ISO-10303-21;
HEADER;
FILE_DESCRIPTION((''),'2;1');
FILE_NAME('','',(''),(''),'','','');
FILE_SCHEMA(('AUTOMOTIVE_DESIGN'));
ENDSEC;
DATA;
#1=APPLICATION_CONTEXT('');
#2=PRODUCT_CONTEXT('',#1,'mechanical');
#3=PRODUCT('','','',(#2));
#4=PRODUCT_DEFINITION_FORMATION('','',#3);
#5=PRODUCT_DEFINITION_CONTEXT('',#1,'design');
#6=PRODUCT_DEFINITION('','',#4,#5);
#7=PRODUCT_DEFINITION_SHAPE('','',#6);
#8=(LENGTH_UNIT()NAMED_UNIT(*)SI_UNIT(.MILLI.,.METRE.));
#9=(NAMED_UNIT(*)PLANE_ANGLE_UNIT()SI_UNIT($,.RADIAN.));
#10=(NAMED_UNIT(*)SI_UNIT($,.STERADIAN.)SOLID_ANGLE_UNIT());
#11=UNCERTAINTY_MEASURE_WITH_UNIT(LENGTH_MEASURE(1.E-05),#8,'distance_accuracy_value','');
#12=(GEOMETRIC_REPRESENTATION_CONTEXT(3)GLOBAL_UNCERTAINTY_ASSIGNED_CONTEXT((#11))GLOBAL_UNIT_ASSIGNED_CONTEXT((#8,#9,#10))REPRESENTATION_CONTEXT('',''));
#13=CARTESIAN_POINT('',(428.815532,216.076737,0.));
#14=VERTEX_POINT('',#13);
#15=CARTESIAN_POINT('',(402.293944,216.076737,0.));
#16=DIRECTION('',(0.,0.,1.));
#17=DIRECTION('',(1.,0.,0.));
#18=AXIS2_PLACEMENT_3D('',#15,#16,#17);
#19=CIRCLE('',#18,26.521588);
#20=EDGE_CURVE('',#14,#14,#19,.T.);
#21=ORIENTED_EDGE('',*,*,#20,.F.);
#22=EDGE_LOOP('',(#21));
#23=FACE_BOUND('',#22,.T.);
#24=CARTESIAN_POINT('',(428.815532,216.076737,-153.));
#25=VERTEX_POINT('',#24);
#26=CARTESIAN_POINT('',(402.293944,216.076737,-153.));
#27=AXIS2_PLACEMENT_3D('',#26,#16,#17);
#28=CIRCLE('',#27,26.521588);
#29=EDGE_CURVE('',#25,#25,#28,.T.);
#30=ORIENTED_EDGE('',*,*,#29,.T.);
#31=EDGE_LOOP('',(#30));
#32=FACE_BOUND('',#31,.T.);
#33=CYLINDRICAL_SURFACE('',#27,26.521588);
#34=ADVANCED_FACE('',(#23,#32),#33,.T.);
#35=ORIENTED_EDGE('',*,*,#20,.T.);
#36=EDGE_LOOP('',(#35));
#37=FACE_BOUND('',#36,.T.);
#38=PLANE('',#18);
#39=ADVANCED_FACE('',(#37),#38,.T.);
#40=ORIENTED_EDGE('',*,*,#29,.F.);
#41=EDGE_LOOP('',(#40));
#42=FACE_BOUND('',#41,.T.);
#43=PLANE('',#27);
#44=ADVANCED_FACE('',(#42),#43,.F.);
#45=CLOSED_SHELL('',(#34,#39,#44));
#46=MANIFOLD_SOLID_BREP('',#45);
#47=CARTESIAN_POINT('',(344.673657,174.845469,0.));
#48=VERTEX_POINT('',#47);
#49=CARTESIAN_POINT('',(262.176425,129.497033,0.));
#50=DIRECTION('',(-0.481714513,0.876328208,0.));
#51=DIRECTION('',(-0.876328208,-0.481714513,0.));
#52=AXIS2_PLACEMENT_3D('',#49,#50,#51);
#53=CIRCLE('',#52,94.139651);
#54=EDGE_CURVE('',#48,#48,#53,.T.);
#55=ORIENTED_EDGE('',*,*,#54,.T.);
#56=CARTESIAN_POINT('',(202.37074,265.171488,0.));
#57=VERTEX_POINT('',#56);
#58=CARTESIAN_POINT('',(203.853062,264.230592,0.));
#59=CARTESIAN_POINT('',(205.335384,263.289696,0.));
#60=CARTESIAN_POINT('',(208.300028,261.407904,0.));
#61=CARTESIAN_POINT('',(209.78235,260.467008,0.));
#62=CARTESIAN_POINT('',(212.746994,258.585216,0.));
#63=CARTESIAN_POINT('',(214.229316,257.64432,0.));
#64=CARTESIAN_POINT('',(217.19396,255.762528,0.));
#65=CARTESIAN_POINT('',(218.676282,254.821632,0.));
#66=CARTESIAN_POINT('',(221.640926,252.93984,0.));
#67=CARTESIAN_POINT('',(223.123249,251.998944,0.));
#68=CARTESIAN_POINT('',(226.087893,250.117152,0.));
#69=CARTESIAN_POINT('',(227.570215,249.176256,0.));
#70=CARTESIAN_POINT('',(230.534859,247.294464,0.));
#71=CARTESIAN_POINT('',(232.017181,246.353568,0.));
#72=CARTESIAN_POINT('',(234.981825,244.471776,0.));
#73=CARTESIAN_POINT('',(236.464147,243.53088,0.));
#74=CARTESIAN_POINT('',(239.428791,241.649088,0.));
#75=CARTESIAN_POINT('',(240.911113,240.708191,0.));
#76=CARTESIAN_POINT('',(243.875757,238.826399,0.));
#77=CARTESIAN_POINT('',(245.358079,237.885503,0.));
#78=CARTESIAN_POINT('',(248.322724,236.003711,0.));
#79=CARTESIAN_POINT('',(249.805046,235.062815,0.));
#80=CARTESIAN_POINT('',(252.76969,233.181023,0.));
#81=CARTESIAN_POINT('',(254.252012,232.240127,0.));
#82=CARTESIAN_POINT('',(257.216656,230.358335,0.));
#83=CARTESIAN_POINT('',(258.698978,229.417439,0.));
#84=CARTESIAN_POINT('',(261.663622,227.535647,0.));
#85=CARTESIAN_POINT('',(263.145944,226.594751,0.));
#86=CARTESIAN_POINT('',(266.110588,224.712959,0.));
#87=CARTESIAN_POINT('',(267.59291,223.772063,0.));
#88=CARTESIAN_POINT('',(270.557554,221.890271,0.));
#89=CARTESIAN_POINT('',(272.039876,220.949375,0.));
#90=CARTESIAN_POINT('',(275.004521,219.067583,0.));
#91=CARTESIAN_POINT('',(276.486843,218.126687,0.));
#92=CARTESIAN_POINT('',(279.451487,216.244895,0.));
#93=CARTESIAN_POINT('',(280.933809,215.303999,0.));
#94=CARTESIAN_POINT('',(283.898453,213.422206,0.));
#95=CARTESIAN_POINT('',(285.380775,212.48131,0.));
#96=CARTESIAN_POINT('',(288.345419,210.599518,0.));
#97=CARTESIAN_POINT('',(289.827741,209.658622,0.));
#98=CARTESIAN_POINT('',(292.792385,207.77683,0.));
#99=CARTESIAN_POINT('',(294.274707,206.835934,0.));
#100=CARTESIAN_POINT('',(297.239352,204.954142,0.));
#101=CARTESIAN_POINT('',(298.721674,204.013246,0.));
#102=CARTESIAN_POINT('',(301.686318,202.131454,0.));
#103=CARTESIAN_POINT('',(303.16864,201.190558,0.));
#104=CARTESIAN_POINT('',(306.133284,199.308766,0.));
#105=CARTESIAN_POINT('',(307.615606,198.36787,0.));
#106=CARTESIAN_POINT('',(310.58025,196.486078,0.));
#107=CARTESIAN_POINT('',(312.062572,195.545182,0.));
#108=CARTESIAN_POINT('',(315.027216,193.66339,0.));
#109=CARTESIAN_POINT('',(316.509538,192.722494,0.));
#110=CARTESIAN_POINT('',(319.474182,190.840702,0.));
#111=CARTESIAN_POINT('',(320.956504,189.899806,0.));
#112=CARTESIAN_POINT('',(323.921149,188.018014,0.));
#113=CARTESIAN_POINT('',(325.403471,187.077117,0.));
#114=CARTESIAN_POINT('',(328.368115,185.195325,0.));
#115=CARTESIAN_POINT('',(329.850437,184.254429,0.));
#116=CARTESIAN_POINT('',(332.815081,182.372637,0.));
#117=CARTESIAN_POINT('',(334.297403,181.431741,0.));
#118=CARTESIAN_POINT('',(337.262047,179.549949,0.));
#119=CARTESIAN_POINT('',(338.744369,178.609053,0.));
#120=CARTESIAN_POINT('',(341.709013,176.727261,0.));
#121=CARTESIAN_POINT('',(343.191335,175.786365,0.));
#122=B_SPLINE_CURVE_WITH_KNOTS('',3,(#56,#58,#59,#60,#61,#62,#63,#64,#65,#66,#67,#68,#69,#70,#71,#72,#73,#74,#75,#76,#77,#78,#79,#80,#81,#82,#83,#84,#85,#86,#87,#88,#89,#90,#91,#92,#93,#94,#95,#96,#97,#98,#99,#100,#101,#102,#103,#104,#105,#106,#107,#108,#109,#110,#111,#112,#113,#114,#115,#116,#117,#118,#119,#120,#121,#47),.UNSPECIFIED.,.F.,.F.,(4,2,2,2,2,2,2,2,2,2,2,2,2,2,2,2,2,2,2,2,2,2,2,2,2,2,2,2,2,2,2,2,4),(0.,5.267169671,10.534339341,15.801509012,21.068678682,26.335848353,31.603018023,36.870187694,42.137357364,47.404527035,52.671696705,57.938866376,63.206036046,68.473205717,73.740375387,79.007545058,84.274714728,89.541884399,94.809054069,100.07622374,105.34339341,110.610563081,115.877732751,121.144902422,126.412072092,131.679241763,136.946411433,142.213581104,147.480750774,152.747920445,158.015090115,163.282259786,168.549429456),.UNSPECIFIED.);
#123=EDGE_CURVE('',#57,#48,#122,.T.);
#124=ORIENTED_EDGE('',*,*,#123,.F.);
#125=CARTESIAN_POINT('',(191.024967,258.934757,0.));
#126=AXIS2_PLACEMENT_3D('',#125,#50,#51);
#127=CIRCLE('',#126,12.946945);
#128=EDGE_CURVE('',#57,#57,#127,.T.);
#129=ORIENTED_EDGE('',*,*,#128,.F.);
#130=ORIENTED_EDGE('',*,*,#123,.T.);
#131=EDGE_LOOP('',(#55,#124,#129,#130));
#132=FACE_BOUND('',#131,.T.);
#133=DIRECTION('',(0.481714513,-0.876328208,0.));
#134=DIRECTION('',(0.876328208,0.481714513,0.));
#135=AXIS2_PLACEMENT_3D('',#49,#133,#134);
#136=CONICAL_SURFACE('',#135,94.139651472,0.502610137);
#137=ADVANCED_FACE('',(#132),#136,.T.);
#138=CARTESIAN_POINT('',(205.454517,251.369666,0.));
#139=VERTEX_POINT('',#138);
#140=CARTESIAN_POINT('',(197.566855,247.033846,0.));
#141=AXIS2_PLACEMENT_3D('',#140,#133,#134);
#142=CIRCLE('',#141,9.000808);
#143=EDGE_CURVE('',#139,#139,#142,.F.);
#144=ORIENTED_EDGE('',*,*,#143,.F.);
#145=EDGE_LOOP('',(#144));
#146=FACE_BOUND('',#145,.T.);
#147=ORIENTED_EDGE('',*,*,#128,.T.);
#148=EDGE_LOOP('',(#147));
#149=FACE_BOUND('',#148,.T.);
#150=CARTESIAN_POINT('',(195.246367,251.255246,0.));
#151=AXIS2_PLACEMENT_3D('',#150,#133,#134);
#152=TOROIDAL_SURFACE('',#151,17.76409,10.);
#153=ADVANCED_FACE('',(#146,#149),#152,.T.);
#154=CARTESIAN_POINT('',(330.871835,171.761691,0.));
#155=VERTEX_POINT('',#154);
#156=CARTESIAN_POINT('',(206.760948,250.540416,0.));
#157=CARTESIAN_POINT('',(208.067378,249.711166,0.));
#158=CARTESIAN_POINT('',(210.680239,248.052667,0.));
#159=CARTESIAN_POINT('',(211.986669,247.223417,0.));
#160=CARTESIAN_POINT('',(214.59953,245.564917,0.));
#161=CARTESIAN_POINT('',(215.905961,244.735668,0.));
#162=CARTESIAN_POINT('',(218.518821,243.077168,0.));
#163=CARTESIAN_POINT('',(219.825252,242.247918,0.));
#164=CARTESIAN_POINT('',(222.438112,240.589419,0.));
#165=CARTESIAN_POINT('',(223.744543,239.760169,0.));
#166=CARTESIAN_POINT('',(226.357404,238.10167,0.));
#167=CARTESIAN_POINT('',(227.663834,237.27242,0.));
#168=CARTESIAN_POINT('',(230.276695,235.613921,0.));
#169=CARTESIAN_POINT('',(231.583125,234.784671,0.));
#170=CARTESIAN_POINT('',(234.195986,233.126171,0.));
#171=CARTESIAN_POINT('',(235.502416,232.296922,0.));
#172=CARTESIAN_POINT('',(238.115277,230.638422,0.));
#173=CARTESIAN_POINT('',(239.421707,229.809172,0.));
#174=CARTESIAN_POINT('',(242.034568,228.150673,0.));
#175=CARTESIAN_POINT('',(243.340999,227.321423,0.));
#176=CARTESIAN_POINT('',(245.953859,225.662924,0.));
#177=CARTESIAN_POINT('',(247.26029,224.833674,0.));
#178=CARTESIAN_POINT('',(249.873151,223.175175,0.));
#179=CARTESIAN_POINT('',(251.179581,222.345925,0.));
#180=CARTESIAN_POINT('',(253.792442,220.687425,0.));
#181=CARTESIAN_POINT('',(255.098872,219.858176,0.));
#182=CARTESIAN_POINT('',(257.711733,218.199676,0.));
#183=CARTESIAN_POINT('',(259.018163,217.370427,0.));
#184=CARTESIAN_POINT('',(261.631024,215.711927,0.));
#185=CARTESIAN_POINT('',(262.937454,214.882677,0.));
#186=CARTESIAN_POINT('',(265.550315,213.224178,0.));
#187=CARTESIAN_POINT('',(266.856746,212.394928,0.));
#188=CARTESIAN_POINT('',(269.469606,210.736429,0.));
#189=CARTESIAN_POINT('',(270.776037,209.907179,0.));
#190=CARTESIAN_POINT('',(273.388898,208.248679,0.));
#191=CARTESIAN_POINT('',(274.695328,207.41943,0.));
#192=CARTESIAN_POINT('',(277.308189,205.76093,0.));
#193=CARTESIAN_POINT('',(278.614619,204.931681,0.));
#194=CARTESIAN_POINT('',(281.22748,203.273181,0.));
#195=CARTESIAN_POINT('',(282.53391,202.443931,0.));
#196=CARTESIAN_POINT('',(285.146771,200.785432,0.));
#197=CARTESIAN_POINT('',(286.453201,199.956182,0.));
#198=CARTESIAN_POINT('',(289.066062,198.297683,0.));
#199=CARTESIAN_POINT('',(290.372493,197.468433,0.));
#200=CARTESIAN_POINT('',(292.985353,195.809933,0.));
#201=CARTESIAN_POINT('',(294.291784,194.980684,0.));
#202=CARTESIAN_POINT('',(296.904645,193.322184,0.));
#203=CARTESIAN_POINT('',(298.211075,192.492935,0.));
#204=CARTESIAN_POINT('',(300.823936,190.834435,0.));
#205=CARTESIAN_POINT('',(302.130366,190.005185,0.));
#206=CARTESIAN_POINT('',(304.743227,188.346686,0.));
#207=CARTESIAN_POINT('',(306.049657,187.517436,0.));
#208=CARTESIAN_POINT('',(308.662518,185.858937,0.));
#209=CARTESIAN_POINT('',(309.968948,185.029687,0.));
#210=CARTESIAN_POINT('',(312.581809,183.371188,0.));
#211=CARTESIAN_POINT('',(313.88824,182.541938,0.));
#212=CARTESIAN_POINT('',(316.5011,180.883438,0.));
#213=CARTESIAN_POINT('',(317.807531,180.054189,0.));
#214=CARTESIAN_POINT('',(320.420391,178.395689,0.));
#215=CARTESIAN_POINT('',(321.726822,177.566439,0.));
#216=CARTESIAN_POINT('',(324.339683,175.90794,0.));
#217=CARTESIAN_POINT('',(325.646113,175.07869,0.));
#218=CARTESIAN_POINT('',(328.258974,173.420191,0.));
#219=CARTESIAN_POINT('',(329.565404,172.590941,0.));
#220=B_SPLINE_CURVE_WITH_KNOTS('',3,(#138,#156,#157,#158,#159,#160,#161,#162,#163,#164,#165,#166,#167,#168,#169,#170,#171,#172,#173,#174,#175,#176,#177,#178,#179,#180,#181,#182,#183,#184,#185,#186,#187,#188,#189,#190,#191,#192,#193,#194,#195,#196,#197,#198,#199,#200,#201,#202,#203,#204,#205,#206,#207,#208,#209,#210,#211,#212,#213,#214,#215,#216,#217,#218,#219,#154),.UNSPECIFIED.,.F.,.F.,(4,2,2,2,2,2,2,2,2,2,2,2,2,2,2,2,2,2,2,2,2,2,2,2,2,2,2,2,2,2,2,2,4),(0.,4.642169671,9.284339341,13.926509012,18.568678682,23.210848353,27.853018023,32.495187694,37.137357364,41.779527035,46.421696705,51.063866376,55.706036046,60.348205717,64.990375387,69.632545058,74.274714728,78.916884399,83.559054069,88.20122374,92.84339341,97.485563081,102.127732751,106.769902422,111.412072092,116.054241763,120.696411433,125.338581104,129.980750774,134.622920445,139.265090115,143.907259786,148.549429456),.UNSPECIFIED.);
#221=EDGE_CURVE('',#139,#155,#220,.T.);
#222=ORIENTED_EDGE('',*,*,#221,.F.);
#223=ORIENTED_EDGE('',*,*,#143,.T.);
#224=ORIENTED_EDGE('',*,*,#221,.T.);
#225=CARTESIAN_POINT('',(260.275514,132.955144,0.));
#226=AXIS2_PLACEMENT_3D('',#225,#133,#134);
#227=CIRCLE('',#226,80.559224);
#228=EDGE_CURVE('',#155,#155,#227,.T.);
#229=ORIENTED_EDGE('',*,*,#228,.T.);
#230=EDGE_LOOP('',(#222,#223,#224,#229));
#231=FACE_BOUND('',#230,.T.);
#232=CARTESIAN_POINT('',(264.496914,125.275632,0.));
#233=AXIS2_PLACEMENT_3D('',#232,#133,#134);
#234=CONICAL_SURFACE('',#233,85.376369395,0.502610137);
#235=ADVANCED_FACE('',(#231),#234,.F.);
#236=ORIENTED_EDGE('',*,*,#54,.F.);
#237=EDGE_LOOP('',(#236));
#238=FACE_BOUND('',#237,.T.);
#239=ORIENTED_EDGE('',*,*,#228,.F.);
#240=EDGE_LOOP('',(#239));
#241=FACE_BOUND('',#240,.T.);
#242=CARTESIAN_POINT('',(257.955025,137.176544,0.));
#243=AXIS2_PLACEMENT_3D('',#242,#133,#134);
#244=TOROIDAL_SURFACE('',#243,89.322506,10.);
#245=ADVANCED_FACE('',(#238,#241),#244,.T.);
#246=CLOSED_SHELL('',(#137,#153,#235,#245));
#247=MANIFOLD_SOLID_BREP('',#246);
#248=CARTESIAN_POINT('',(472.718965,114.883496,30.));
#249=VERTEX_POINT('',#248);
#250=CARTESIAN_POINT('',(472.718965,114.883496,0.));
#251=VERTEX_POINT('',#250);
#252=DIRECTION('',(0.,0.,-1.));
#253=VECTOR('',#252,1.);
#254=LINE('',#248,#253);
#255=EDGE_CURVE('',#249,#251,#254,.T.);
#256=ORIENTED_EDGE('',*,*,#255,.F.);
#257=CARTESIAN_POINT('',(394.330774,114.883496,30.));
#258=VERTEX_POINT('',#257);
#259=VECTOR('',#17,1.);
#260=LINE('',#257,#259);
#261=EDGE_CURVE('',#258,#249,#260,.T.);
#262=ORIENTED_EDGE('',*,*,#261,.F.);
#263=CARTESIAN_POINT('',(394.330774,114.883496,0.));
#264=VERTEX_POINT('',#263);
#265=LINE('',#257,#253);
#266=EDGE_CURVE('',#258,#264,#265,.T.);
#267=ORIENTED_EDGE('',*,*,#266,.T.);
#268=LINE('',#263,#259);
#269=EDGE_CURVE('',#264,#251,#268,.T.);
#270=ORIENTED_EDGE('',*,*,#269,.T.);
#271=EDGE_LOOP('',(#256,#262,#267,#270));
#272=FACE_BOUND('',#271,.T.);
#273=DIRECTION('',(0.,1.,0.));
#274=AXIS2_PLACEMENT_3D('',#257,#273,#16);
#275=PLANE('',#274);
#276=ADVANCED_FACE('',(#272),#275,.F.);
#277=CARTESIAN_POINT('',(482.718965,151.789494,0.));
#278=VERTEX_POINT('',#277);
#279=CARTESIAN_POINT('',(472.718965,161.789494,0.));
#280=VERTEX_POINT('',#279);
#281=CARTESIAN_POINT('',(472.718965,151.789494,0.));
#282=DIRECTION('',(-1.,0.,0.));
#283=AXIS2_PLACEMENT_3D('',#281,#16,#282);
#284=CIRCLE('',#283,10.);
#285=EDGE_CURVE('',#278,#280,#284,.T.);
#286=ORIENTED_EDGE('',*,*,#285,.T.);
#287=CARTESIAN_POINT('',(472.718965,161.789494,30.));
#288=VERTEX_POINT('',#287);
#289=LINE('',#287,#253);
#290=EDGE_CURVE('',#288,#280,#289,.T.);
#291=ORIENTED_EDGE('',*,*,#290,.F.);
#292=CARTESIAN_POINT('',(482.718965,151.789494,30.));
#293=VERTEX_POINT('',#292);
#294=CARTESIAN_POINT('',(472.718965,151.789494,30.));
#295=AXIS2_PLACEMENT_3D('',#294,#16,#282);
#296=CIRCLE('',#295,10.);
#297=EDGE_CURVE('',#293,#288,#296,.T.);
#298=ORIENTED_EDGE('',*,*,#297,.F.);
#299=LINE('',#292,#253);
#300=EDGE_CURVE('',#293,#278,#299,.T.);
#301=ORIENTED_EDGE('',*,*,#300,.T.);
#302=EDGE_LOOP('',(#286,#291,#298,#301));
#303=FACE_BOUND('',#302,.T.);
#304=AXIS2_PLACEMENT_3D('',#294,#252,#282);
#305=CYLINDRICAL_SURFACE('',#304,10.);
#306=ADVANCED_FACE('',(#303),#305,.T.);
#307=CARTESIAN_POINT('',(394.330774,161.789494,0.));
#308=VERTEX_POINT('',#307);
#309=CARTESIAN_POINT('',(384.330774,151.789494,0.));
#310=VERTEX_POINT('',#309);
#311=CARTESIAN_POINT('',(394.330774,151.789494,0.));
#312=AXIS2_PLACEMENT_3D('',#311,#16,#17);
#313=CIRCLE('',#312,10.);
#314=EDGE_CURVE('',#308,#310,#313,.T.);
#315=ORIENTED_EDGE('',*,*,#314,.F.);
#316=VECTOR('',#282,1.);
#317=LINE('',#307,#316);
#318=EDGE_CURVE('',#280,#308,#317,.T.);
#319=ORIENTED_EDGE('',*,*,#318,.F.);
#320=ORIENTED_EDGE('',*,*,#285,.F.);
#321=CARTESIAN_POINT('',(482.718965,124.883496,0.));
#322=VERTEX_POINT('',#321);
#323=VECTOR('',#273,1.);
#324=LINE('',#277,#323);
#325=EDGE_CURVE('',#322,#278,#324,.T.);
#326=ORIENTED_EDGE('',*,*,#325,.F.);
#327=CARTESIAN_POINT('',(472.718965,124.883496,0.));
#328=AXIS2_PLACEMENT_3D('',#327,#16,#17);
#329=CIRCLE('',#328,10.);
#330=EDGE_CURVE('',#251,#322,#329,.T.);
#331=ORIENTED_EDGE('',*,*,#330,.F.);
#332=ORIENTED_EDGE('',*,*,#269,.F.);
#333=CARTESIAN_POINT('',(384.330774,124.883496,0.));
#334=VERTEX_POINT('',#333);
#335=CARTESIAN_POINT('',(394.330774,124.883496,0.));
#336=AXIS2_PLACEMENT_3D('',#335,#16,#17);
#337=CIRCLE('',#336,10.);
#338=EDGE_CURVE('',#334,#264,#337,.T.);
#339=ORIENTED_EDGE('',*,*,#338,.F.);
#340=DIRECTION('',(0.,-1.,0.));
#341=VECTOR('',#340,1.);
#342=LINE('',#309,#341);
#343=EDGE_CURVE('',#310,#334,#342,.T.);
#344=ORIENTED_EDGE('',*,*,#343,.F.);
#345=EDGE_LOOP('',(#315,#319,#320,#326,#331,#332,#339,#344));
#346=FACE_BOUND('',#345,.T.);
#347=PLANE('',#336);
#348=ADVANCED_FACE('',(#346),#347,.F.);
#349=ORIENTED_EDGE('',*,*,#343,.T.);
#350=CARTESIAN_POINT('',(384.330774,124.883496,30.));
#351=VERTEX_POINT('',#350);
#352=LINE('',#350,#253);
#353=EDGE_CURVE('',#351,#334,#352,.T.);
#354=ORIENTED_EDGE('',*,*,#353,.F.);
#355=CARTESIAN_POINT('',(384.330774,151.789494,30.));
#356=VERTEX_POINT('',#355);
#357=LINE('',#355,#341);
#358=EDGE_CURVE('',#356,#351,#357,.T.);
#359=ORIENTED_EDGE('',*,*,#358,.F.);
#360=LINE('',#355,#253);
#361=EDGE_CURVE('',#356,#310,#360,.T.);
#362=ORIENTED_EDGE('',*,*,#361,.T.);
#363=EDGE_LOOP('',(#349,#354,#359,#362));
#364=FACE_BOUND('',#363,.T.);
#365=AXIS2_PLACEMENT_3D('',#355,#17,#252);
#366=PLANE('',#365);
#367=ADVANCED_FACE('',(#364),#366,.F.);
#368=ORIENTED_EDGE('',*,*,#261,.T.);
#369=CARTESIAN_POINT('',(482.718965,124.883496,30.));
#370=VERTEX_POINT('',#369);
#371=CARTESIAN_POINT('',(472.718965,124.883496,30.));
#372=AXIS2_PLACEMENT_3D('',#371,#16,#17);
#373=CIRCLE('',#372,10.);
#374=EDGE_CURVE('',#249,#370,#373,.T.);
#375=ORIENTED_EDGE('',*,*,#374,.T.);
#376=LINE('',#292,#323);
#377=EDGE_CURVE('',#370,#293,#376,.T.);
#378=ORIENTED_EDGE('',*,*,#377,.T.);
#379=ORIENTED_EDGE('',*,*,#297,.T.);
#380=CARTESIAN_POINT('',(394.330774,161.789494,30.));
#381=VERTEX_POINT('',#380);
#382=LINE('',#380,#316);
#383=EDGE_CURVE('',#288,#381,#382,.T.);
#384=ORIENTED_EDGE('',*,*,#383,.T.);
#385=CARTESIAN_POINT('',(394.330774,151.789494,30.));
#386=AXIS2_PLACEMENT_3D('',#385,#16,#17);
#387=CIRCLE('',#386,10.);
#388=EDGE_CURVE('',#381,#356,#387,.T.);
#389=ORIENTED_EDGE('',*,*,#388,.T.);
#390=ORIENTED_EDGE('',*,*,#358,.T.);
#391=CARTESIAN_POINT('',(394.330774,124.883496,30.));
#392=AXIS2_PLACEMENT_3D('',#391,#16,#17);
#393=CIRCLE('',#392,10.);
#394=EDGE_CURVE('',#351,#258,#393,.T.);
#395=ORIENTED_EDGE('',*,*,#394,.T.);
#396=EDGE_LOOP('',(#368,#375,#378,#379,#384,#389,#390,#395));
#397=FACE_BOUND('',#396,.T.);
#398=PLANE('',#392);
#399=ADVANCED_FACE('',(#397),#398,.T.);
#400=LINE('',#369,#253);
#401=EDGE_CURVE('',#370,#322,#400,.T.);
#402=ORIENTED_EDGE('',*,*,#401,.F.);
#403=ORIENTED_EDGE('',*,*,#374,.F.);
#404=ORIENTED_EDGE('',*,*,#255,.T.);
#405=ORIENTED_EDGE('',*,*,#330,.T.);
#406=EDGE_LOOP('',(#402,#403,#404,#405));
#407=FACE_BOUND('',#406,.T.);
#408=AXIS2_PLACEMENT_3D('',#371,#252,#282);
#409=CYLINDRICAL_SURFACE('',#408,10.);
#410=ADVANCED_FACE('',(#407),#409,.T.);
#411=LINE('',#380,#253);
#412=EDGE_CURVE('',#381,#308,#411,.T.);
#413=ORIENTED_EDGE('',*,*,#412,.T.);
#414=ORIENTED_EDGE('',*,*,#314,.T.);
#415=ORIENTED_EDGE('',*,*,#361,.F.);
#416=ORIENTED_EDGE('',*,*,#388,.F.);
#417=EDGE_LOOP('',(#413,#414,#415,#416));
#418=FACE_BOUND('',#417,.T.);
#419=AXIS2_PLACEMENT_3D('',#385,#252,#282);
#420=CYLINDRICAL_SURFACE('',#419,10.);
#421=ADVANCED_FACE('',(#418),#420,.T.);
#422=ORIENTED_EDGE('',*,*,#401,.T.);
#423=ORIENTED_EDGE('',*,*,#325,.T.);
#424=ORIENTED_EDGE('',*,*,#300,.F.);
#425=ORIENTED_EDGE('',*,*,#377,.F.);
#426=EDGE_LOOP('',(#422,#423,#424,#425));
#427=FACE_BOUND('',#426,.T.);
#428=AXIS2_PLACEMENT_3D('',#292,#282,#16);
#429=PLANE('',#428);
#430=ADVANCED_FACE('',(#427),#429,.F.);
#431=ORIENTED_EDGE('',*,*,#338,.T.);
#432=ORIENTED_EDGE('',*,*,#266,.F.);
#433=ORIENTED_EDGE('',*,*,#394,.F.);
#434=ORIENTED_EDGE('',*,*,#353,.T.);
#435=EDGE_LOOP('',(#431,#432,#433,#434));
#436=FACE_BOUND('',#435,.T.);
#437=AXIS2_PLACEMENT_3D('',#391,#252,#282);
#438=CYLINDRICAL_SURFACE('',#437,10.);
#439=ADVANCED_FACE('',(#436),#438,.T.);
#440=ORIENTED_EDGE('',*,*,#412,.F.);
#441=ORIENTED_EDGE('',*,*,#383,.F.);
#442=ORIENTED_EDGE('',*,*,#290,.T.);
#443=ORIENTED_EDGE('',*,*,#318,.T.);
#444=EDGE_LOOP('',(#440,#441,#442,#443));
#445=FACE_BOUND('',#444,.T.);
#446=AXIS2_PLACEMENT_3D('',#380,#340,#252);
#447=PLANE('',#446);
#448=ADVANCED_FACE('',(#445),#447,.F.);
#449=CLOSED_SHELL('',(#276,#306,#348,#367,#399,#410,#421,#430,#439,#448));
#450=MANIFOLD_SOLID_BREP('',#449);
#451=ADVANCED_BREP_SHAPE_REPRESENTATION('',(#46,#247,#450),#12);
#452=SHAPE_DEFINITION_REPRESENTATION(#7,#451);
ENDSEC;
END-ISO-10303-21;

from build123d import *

# Parameters (mm, degrees)
SKETCH1_W           = 10
SKETCH1_H           = 168.549429456
FILLET1_R           = 10
SKETCH2_R           = 26.521587753
BOSS_EXTRUDE1_DEPTH = 153
BOSS_EXTRUDE2_DEPTH = 30


with BuildPart() as part:
    # Sketch1 → Revolve-Thin1 (revolve)
    with BuildSketch(Plane.XY, mode=Mode.PRIVATE) as revolve_thin1_sk:
        with Locations((184.679193334, 168.423310959)):
            Rectangle(SKETCH1_W, SKETCH1_H)
    revolve(revolve_thin1_sk.sketch.rotate(Axis((194.453275648, 252.698025687, 0), (0.48171451341834604, -0.8763282076722888, 0)), 180), axis=Axis((194.453275648, 252.698025687, 0), (0.48171451341834604, -0.8763282076722888, 0)))

    # Fillet1
    fillet1_edges = [part.edges().sort_by_distance(p)[0] for p in [
        (189.679193334, 252.698025687, 0),
        (189.679193334, 84.148596231, 0),
    ]]
    fillet(fillet1_edges, radius=FILLET1_R - 0.0001)  # a hair under: the kernel refuses the full size


with BuildPart() as body_2:
    # Sketch2 → Boss-Extrude1 (new body)
    with BuildSketch(Plane.XY):
        with Locations((402.293944257, 216.076736945)):
            Circle(SKETCH2_R)
    extrude(amount=-BOSS_EXTRUDE1_DEPTH)


with BuildPart() as body_3:
    # Sketch3 → Boss-Extrude2 (new body)
    with BuildSketch(Plane.XY):
        with BuildLine():
            Line((394.330774187, 161.789494026), (472.718965476, 161.789494026))
            ThreePointArc((472.718965476, 161.789494026), (479.790033288, 158.860561838), (482.718965476, 151.789494026))
            Line((482.718965476, 151.789494026), (482.718965476, 124.883495853))
            ThreePointArc((482.718965476, 124.883495853), (479.790033288, 117.812428042), (472.718965476, 114.883495853))
            Line((472.718965476, 114.883495853), (394.330774187, 114.883495853))
            ThreePointArc((394.330774187, 114.883495853), (387.259706375, 117.812428042), (384.330774187, 124.883495853))
            Line((384.330774187, 124.883495853), (384.330774187, 151.789494026))
            ThreePointArc((384.330774187, 151.789494026), (387.259706375, 158.860561838), (394.330774187, 161.789494026))
        make_face()
    extrude(amount=BOSS_EXTRUDE2_DEPTH)


solid = Compound([part.part, body_2.part, body_3.part])
